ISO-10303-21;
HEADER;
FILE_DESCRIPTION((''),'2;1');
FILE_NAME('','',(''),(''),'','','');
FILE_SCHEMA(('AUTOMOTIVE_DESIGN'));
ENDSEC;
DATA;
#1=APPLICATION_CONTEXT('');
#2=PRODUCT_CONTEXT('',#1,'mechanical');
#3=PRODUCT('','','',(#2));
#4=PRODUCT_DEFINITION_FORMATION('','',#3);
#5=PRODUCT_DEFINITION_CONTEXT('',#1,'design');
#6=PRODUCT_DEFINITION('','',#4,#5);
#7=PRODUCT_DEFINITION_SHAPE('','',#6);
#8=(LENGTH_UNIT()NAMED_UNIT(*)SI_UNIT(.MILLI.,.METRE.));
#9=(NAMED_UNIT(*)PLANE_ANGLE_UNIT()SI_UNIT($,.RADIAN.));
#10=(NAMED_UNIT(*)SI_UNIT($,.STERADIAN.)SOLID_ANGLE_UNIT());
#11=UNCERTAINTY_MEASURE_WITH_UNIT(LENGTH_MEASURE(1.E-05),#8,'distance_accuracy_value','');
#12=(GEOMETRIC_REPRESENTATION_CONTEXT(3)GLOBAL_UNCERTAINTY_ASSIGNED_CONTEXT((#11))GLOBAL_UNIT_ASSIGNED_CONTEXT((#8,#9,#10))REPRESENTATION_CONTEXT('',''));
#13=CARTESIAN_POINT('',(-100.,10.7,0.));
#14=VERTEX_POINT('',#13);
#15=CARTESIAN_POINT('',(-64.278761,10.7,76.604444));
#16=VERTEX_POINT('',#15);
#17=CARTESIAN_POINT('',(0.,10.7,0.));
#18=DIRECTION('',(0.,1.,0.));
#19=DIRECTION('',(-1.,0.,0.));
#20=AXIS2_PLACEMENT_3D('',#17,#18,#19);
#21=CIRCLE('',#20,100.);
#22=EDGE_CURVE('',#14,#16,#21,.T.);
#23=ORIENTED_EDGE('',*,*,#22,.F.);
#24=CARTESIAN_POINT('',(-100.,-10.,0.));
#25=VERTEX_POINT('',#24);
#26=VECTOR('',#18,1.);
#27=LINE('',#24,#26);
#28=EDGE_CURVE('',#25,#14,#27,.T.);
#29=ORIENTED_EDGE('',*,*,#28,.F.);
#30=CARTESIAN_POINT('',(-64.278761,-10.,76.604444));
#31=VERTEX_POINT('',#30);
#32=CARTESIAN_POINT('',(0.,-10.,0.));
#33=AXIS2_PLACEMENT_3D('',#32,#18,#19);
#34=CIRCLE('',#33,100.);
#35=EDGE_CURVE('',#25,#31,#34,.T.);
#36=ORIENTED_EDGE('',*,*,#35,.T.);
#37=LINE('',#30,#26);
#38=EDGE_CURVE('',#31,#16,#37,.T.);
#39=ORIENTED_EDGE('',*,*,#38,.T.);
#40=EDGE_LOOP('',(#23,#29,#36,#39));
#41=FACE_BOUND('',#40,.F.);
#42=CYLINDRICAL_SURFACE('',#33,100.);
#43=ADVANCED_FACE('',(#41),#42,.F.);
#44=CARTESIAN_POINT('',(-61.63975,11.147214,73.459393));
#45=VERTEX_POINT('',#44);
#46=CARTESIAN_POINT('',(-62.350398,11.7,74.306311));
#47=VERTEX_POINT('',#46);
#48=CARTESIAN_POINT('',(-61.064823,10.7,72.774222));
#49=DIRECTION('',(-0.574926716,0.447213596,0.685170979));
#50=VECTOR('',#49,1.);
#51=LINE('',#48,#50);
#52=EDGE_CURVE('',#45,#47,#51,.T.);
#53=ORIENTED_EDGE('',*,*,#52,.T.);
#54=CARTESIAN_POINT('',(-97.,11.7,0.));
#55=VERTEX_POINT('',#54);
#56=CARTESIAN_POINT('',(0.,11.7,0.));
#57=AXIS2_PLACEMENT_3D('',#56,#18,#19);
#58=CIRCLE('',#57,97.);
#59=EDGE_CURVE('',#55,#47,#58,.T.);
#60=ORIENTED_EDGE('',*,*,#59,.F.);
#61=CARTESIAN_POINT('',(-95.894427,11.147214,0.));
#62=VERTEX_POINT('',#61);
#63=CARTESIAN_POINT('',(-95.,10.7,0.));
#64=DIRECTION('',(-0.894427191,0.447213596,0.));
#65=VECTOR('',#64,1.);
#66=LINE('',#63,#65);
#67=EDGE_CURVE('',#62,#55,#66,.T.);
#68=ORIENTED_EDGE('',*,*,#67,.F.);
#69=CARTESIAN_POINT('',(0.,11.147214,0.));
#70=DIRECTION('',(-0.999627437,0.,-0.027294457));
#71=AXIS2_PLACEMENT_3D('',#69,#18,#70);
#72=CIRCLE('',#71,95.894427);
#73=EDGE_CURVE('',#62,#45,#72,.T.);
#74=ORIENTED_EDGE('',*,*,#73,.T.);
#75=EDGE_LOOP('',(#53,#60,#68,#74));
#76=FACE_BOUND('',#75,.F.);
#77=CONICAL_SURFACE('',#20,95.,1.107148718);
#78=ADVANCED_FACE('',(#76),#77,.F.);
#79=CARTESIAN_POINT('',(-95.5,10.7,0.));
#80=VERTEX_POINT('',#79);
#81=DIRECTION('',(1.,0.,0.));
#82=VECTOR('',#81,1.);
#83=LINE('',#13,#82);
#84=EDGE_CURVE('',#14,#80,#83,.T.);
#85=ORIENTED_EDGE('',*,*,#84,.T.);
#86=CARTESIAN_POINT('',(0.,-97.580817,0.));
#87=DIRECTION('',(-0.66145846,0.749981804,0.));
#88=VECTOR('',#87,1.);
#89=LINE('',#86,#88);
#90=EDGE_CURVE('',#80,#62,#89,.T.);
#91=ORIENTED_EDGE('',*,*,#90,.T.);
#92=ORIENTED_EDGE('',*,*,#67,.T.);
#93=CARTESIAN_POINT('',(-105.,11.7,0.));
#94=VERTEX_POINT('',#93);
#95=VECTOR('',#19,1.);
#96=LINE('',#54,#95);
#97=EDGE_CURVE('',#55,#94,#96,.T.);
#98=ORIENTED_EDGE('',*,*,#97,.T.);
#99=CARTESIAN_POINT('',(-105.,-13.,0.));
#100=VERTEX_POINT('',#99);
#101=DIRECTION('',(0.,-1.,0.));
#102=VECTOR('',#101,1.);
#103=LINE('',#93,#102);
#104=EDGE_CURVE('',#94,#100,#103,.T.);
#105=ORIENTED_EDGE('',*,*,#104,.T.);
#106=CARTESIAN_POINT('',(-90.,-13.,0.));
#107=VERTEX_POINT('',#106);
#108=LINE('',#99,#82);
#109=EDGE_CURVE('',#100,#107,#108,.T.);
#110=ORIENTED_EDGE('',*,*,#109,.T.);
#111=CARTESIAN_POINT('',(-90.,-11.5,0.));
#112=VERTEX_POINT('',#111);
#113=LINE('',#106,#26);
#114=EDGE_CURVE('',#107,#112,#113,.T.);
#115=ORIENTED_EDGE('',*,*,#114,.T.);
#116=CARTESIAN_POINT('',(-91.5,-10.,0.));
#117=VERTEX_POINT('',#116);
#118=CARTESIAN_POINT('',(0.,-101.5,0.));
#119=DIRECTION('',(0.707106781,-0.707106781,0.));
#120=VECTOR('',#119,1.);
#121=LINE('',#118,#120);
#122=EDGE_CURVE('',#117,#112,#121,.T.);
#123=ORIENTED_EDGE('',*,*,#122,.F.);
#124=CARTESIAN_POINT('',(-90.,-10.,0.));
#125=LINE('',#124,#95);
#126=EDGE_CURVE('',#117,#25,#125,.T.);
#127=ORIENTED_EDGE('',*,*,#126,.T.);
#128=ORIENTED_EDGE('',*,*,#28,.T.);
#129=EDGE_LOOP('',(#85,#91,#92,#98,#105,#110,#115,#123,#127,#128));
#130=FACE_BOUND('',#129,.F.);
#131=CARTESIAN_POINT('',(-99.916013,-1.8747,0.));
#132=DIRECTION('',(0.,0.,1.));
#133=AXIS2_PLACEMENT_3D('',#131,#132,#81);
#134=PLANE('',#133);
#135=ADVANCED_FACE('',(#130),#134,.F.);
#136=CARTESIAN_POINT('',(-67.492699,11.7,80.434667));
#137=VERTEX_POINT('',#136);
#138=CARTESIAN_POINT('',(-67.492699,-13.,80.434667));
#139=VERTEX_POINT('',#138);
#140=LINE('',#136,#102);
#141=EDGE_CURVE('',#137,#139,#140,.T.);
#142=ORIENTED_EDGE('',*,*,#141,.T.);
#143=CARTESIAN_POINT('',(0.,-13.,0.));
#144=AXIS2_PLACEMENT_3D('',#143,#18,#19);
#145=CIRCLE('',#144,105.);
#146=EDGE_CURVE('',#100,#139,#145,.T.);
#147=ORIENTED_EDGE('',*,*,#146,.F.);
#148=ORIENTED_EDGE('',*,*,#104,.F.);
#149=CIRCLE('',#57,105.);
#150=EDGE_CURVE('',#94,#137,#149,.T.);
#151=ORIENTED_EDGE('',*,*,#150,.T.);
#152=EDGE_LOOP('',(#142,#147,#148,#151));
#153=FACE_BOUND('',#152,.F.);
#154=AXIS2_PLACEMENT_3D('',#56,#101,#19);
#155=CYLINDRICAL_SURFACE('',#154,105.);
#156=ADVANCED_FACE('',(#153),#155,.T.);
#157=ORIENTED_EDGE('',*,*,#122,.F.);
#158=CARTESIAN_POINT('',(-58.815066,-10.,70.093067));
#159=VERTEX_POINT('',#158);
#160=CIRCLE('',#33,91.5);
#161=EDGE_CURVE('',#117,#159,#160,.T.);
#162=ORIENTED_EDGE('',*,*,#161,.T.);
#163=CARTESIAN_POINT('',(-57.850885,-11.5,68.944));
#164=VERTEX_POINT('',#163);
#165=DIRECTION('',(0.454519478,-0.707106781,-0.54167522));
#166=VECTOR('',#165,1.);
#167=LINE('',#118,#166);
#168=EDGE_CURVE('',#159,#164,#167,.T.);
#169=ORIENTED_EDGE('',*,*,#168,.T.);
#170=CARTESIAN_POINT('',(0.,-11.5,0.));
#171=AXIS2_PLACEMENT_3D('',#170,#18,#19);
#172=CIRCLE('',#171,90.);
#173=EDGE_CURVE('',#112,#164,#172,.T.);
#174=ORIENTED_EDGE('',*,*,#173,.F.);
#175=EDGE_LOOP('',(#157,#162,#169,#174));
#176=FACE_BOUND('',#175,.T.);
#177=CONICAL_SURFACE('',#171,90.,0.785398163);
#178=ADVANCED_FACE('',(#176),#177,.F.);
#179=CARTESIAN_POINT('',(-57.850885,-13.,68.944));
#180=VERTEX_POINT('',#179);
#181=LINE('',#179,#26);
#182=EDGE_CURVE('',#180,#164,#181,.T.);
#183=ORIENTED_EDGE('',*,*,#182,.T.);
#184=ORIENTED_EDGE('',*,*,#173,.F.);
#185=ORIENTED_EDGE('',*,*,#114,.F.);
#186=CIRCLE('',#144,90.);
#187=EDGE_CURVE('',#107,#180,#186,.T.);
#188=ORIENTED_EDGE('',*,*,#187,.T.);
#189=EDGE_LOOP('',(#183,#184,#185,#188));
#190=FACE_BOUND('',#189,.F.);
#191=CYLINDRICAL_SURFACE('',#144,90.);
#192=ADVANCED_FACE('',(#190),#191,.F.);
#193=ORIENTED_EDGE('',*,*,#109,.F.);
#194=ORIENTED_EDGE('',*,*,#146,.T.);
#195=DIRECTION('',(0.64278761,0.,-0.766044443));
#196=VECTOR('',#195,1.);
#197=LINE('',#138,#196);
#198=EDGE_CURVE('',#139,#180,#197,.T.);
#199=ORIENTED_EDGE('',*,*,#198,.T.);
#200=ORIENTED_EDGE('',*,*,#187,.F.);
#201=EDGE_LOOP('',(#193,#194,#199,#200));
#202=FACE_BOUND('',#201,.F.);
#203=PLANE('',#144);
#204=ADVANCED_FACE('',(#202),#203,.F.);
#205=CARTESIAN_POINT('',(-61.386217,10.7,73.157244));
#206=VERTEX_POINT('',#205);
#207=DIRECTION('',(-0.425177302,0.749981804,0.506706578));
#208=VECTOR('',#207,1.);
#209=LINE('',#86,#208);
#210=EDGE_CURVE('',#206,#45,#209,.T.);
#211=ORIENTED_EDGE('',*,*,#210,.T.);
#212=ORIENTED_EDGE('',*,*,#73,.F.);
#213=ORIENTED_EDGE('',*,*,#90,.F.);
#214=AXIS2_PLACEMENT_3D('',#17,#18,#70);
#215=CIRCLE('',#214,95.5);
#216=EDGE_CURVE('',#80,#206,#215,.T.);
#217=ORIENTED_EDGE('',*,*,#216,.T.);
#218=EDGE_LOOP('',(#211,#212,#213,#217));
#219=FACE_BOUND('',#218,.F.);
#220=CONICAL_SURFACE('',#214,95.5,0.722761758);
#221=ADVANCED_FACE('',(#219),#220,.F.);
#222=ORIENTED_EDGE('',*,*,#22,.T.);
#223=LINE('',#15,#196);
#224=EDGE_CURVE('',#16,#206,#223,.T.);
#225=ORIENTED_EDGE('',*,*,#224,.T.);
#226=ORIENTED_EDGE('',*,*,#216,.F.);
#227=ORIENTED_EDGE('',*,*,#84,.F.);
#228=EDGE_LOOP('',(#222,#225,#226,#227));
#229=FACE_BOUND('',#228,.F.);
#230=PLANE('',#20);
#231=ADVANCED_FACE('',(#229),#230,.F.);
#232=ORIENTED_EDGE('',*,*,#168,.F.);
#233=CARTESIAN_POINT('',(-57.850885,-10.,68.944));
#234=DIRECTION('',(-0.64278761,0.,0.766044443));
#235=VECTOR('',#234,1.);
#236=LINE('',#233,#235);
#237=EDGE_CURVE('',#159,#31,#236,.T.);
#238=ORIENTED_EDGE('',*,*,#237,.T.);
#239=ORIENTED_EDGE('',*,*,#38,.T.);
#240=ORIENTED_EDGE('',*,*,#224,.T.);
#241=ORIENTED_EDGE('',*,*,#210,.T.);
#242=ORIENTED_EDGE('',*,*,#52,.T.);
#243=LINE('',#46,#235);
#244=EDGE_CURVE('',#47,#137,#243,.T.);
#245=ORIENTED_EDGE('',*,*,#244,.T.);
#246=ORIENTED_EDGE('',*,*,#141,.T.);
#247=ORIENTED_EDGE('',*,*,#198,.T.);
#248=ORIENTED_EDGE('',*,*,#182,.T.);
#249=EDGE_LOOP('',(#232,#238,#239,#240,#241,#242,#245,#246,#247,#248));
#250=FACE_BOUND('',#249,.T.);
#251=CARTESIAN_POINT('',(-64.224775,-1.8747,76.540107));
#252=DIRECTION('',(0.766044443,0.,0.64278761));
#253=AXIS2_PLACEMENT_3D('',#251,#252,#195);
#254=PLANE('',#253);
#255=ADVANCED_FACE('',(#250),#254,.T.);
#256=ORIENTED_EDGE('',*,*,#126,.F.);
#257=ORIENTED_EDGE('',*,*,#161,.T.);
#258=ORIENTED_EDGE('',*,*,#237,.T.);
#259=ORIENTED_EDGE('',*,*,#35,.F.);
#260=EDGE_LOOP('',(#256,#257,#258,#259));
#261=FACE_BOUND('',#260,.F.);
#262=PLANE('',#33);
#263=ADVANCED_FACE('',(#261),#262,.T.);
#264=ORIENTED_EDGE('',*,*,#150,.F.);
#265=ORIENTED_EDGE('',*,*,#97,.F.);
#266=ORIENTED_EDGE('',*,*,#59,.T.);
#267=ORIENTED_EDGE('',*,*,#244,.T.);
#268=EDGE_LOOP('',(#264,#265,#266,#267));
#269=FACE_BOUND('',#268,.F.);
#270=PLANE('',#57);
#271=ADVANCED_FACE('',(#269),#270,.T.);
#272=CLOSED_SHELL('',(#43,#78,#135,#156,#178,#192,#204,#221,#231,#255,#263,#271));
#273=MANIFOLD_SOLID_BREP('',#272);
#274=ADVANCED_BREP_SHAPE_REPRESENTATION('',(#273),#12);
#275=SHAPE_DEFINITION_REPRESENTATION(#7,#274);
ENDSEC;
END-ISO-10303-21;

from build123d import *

# Parameters (mm, degrees)
F1_ANGLE    = 50
F2_SIZE     = 1.5
F3_T2_ANGLE = 53.1281028161


# Not quite as in the source:
# - a fillet or chamfer that OpenCascade refuses, or shapes differently, is made with other operations: its cross-section is extruded or revolved along the edge and cut away or added


with BuildPart() as f1:
    # F0 (on Top) → F1 (revolve)
    with BuildSketch(Plane.XY):
        Polygon((-90, -10), (-100, -10), (-100, 10.7), (-95, 10.7), (-97, 11.7), (-105, 11.7), (-105, -13), (-90, -13), align=None)
    revolve(axis=Axis((0, 3.89609579, 0), (0, 1, 0)), revolution_arc=F1_ANGLE)

    # F2
    f2_edges = [f1.edges().sort_by_distance(p)[0] for p in [
        (-81.567701, -10, 38.035644),
    ]]
    chamfer(f2_edges, length=F2_SIZE)

    # F3: chamfer of 1 x 0.5 on 1 edges, made by hand

    # F3_s1 → F3_t2 (revolve, cut)
    with BuildSketch(Plane(origin=(0, 0, 0), x_dir=(0, 1, 0), z_dir=(0.0272944566, 0, -0.9996274369))):
        Polygon((10.7, -95.5), (11.1472135955, -95.894427191), (10.7, -95), align=None)
    revolve(axis=Axis((0, 10.7, 0), (0, 1, 0)), revolution_arc=F3_T2_ANGLE, mode=Mode.SUBTRACT)


solid = f1.part
